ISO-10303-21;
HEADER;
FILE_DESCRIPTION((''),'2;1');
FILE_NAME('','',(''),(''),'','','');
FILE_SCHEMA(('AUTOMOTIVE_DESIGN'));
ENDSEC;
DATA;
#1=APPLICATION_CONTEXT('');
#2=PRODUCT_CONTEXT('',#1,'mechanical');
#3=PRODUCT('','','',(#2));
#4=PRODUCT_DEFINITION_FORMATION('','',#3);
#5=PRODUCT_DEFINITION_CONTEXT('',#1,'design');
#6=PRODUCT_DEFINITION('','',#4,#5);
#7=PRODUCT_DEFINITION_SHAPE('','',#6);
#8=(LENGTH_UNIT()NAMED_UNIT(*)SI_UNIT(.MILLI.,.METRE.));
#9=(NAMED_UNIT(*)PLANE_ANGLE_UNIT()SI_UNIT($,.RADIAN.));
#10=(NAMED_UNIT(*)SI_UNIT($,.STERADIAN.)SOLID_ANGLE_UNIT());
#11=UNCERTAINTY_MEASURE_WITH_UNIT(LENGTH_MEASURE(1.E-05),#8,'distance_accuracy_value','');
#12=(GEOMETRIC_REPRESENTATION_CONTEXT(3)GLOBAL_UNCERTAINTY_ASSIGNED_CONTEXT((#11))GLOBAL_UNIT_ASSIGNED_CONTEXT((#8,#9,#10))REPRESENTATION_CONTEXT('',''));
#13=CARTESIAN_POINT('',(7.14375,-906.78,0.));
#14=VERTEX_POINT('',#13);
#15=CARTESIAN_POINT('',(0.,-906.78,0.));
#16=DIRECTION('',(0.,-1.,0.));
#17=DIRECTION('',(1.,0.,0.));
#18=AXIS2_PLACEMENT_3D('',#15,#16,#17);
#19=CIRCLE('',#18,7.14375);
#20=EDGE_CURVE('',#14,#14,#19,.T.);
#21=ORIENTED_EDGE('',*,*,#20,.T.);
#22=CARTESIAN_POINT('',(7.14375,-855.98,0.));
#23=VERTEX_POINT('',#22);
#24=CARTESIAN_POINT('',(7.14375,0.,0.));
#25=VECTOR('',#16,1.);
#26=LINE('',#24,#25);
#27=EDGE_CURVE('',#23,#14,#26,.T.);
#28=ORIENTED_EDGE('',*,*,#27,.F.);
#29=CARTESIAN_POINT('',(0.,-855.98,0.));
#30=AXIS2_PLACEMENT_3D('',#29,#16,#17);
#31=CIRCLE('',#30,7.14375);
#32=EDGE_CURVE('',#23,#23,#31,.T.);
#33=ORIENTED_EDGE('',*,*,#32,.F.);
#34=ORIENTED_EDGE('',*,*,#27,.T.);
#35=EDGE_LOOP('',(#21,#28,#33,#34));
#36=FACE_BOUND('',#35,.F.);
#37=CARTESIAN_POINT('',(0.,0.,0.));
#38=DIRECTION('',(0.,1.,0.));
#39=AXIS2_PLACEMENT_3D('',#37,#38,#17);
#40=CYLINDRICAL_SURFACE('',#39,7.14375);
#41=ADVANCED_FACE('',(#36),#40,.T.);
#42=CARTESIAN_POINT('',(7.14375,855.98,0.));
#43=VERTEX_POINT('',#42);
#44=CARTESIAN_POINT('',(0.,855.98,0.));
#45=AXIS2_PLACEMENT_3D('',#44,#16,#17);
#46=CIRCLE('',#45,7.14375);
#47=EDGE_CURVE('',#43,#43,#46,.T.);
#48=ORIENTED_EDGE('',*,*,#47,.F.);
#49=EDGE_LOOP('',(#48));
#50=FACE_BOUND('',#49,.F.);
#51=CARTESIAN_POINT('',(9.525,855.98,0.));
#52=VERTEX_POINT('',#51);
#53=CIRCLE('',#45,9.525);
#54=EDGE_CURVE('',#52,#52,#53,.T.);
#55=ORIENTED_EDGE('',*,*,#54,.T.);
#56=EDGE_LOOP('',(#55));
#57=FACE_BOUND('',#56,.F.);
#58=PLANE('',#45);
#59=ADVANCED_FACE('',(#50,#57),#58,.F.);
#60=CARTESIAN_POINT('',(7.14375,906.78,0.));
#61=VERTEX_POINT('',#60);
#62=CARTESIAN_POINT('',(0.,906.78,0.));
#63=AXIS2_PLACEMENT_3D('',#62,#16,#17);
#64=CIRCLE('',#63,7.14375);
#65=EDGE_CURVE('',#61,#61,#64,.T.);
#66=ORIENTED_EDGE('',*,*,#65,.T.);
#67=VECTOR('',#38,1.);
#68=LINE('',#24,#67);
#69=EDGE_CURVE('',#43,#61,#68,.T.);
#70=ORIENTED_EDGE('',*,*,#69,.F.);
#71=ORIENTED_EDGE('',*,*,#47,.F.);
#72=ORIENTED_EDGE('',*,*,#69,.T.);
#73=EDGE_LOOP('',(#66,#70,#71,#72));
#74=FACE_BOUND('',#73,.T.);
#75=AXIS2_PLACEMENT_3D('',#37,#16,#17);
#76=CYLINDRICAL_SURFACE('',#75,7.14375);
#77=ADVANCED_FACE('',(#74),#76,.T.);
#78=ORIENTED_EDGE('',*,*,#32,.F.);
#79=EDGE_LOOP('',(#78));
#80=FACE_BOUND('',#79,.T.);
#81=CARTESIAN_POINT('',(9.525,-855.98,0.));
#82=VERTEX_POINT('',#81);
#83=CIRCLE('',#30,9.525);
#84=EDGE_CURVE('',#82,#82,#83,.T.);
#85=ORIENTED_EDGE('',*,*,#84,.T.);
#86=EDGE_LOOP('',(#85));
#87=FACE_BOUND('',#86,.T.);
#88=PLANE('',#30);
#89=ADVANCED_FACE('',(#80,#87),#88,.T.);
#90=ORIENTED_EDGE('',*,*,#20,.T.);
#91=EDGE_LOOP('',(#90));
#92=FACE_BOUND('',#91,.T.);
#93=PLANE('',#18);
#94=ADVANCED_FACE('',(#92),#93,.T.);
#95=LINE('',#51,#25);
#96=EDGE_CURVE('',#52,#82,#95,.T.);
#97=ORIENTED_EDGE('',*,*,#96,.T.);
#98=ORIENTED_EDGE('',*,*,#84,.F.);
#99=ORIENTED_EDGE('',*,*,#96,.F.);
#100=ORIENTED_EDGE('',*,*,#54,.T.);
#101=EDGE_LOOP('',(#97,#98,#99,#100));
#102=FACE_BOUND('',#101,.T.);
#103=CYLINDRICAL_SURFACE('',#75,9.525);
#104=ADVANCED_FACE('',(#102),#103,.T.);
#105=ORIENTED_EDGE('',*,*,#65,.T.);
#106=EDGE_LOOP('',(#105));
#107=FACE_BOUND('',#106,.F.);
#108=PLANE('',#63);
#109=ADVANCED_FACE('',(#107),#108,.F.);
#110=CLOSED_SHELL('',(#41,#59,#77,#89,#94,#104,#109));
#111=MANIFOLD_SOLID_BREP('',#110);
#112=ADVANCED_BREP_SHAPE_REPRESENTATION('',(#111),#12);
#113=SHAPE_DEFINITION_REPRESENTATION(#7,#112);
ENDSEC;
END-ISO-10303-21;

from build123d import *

# Parameters (mm, degrees)
F0_R          = 9.525
F0_R_2        = 7.14375
F1_DEPTH      = 855.98
F1_DEPTH_BACK = 855.98
F2_R          = 7.14375
F3_DEPTH      = 906.78
F3_DEPTH_BACK = 906.78


# Not quite as in the source:
# - a feature names something its author has since deleted; it is built from what else it names


with BuildPart() as f1:
    # F0 (on Front) → F1 (new body, two sides)
    with BuildSketch(Plane.XZ) as f1_sk:
        Circle(F0_R)
        Circle(F0_R_2, mode=Mode.SUBTRACT)
    extrude(amount=F1_DEPTH)
    extrude(f1_sk.sketch, amount=-F1_DEPTH_BACK)

    # F2 (on Front) → F3 (join, two sides)
    with BuildSketch(Plane.XZ) as f3_sk:
        Circle(F2_R)
    extrude(amount=F3_DEPTH)
    extrude(f3_sk.sketch, amount=-F3_DEPTH_BACK)


solid = f1.part
